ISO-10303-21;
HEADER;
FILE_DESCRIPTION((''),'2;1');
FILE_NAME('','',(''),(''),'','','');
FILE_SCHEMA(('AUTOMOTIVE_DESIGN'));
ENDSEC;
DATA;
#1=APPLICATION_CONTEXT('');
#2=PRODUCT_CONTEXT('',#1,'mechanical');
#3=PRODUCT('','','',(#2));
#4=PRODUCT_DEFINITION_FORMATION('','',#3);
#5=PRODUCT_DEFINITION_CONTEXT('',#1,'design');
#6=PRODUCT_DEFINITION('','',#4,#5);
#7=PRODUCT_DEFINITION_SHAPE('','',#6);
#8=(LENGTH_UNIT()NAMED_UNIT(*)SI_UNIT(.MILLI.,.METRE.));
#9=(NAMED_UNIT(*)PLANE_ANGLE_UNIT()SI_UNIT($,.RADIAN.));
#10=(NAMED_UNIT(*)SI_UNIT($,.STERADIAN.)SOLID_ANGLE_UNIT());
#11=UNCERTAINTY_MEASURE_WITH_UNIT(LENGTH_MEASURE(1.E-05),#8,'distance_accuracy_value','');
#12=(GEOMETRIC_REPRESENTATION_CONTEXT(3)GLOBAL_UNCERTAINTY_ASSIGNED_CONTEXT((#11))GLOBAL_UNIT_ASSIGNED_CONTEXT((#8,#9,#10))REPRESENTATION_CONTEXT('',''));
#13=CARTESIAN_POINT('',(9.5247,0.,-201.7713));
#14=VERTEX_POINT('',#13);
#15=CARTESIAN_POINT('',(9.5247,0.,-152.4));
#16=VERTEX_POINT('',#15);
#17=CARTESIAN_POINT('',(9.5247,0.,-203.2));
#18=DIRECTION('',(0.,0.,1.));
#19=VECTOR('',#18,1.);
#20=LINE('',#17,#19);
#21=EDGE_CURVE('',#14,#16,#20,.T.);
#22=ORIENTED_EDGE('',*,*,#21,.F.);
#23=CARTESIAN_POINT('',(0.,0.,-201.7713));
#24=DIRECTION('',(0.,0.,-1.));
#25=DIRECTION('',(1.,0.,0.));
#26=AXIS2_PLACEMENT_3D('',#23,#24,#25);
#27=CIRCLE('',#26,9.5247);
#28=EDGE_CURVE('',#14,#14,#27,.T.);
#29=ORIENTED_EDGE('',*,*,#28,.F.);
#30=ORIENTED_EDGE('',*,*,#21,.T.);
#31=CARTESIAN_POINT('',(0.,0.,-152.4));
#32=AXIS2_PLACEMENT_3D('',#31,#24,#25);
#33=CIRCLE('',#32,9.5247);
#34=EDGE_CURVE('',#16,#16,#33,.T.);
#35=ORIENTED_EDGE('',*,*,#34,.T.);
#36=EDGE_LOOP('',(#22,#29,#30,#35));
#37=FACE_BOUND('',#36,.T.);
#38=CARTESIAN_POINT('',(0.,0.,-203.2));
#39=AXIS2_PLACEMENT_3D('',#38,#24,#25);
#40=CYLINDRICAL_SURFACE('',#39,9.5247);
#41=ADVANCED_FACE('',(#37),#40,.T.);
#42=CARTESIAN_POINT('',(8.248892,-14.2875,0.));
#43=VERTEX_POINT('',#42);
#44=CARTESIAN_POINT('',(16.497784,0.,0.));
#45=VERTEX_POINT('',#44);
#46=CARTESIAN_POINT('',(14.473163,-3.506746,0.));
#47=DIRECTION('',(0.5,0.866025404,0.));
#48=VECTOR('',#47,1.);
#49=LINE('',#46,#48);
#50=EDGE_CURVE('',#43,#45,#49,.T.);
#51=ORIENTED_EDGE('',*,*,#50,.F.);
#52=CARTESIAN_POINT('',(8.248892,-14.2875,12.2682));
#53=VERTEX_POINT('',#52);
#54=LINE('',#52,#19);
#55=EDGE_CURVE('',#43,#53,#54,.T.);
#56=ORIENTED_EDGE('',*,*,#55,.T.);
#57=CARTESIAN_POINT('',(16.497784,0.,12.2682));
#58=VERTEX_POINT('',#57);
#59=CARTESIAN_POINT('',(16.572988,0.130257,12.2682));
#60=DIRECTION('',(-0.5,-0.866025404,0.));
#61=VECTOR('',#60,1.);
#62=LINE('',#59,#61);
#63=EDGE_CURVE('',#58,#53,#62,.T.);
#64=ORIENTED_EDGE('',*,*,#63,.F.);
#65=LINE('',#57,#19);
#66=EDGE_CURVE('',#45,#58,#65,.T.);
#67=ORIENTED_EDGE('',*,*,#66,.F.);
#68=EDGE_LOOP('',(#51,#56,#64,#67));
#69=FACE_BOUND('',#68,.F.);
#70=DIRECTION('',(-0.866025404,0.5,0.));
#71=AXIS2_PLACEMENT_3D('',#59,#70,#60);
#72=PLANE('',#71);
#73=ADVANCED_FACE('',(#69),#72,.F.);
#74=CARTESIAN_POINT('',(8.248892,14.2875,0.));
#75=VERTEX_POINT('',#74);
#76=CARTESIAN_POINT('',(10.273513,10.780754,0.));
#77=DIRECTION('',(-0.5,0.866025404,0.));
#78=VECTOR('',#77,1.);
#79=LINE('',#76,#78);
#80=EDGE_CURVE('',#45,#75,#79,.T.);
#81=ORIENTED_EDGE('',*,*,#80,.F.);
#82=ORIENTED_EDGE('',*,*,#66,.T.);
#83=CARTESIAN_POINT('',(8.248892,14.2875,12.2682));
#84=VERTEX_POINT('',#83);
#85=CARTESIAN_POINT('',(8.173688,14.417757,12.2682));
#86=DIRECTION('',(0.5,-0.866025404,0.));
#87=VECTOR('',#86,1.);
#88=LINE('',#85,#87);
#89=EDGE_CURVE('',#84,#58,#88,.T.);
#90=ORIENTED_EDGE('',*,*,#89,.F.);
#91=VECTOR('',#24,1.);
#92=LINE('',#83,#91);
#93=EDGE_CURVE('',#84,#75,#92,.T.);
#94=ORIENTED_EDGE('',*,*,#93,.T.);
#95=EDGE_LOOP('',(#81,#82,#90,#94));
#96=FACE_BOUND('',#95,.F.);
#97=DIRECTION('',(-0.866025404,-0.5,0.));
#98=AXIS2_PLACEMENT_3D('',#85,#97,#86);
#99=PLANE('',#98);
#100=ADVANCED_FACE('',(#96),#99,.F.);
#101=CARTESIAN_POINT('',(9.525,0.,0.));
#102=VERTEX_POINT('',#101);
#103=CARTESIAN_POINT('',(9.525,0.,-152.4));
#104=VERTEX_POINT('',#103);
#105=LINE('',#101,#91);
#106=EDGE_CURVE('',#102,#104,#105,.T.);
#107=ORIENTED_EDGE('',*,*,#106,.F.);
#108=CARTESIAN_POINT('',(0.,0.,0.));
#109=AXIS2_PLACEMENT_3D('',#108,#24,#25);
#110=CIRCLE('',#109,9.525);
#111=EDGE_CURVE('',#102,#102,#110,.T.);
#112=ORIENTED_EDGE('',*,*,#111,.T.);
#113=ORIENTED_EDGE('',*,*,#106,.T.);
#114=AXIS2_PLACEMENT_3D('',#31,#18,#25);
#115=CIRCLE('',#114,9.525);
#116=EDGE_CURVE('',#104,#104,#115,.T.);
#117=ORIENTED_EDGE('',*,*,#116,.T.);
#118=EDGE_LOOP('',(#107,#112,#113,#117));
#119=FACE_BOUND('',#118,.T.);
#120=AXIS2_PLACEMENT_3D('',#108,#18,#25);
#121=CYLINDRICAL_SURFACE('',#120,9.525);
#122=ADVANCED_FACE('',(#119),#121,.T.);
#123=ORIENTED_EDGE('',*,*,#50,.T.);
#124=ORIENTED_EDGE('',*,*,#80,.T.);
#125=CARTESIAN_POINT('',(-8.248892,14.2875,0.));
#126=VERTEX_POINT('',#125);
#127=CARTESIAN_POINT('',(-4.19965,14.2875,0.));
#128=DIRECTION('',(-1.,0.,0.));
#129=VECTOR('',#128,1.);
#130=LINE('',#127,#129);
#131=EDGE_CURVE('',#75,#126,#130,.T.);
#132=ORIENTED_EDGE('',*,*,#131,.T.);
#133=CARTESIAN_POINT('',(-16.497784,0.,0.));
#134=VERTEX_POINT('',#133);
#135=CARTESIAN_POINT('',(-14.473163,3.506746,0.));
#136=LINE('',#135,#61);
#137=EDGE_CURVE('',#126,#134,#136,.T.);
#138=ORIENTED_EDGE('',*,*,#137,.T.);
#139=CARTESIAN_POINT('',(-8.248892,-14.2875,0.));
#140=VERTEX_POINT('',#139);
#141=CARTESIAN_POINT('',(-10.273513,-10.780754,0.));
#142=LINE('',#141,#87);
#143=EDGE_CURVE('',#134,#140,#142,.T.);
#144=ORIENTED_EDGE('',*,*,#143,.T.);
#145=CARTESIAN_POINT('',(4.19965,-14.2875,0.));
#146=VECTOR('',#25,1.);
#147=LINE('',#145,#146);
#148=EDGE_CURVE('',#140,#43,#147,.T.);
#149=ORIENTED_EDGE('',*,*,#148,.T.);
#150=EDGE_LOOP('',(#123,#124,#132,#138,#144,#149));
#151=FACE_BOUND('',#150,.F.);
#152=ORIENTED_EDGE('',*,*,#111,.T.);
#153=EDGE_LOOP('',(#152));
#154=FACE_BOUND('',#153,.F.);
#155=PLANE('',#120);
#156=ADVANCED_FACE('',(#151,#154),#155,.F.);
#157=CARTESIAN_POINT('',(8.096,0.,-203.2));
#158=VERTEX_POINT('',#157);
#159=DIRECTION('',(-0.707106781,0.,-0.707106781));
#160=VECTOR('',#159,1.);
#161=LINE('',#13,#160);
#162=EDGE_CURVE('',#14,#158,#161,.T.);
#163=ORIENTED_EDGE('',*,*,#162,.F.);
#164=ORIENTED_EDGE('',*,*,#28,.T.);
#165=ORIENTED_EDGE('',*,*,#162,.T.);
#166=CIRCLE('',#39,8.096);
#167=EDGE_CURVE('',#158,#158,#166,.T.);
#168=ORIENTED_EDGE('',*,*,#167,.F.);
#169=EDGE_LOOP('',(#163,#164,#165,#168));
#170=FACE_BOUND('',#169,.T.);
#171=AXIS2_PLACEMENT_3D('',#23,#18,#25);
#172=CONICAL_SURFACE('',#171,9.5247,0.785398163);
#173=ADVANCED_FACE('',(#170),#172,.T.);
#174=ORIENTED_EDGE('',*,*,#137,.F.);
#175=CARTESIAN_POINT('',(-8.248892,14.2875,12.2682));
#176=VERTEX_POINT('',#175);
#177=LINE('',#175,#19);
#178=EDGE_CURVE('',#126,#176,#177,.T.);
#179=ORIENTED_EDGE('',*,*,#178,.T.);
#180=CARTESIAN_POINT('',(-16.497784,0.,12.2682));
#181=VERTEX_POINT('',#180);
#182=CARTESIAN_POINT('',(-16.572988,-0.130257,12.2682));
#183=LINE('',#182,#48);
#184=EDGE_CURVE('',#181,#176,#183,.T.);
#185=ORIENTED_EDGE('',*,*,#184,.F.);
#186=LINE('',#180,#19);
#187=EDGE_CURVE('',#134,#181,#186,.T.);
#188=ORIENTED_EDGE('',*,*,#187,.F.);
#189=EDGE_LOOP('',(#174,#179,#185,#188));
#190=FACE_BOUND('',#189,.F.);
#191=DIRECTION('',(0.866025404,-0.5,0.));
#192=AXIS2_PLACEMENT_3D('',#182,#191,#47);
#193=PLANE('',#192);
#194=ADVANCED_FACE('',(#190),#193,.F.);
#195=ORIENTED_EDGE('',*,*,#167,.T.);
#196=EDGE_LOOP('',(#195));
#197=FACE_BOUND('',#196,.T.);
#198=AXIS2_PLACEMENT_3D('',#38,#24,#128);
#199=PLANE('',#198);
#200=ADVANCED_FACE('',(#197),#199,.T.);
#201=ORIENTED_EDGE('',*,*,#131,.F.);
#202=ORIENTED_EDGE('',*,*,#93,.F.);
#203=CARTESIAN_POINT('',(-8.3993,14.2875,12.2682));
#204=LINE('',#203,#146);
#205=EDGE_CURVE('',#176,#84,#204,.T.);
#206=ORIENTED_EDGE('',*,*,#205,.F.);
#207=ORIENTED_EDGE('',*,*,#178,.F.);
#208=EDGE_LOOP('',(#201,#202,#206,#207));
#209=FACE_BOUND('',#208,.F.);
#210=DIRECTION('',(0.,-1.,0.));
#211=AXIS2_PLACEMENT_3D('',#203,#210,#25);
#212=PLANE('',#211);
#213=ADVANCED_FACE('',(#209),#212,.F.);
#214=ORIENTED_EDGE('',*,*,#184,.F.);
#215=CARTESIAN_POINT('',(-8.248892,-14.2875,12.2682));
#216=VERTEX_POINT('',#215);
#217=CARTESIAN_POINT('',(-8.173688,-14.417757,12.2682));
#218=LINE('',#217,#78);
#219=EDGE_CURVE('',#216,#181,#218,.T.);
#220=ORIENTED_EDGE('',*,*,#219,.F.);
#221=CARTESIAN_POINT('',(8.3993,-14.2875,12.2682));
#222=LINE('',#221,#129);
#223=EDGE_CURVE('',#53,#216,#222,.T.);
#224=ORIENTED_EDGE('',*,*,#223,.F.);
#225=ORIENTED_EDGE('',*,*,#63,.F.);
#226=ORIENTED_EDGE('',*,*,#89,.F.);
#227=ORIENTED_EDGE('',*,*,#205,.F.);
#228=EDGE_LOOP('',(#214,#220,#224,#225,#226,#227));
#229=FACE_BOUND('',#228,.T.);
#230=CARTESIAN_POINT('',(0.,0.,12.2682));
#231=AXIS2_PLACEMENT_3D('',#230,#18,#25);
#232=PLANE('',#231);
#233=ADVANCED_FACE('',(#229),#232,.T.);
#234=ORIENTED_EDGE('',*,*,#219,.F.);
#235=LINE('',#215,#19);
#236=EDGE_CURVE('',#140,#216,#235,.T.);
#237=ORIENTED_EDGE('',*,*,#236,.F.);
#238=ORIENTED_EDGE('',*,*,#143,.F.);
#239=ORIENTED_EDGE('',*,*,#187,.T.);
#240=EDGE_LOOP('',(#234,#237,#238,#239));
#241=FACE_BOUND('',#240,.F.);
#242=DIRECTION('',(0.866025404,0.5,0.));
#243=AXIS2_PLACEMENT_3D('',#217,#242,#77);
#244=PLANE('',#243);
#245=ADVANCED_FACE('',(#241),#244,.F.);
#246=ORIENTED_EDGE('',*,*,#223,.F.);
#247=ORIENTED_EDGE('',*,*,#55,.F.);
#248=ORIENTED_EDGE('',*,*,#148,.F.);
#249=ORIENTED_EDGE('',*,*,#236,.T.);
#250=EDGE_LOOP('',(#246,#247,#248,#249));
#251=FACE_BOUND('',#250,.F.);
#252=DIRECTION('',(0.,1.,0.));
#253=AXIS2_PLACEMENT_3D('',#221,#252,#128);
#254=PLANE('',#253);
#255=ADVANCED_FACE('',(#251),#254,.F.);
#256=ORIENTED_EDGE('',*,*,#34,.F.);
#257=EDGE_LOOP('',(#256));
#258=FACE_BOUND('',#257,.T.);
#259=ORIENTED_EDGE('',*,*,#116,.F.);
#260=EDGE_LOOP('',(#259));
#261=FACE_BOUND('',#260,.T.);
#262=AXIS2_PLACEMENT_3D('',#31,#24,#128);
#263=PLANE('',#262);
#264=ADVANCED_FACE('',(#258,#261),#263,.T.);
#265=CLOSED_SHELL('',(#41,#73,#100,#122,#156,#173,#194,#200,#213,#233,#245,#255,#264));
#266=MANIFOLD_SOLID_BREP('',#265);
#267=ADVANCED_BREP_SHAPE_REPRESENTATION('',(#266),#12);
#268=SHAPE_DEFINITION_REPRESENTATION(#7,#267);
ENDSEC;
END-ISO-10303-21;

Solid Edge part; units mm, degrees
sketch "Sketch1" plane through (0, 0, 0) normal (0, 0, 1) x (1, 0, 0)
  circle A0 centre (0, 0) radius 16.5735
  dimension "D1" = 33.147
extrude "Protrusion1" add sketch "Sketch1" along normal blind 12.2682
sketch "Sketch2" plane through (0, 0, 0) normal (0, 0, -1) x (1, 0, 0)
  circle A0 centre (0, 0) radius 9.525
extrude "Protrusion2" add sketch "Sketch2" along normal blind 203.2
sketch "Sketch3" plane through (0, 0, -203.2) normal (0, 0, -1) x (1, 0, 0)
  circle A0 centre (0, 0) radius 9.5247
extrude "Cutout1" cut sketch "Sketch3" against normal blind 50.8 flip side to cut
chamfer "Chamfer_1" distance 1.4287 angle 45 1 edges at (-9.5247, 0, -203.2)
sketch "Sketch4" plane through (0, 0, 12.2682) normal (0, 0, 1) x (1, 0, 0)
  line L0 (-8.3993, 14.2875) -> (8.3993, 14.2875)
  dimension "D1" = 28.575
extrude "Cutout2" cut sketch "Sketch4" against normal up to next material side at (0, 14.3375, 12.2682)
pattern_circular "Pattern1" count 6 over 360 about axis through (0, 0, 12.2682) along (0, 0, 1) of "Cutout2"
properties part number "24106505"
